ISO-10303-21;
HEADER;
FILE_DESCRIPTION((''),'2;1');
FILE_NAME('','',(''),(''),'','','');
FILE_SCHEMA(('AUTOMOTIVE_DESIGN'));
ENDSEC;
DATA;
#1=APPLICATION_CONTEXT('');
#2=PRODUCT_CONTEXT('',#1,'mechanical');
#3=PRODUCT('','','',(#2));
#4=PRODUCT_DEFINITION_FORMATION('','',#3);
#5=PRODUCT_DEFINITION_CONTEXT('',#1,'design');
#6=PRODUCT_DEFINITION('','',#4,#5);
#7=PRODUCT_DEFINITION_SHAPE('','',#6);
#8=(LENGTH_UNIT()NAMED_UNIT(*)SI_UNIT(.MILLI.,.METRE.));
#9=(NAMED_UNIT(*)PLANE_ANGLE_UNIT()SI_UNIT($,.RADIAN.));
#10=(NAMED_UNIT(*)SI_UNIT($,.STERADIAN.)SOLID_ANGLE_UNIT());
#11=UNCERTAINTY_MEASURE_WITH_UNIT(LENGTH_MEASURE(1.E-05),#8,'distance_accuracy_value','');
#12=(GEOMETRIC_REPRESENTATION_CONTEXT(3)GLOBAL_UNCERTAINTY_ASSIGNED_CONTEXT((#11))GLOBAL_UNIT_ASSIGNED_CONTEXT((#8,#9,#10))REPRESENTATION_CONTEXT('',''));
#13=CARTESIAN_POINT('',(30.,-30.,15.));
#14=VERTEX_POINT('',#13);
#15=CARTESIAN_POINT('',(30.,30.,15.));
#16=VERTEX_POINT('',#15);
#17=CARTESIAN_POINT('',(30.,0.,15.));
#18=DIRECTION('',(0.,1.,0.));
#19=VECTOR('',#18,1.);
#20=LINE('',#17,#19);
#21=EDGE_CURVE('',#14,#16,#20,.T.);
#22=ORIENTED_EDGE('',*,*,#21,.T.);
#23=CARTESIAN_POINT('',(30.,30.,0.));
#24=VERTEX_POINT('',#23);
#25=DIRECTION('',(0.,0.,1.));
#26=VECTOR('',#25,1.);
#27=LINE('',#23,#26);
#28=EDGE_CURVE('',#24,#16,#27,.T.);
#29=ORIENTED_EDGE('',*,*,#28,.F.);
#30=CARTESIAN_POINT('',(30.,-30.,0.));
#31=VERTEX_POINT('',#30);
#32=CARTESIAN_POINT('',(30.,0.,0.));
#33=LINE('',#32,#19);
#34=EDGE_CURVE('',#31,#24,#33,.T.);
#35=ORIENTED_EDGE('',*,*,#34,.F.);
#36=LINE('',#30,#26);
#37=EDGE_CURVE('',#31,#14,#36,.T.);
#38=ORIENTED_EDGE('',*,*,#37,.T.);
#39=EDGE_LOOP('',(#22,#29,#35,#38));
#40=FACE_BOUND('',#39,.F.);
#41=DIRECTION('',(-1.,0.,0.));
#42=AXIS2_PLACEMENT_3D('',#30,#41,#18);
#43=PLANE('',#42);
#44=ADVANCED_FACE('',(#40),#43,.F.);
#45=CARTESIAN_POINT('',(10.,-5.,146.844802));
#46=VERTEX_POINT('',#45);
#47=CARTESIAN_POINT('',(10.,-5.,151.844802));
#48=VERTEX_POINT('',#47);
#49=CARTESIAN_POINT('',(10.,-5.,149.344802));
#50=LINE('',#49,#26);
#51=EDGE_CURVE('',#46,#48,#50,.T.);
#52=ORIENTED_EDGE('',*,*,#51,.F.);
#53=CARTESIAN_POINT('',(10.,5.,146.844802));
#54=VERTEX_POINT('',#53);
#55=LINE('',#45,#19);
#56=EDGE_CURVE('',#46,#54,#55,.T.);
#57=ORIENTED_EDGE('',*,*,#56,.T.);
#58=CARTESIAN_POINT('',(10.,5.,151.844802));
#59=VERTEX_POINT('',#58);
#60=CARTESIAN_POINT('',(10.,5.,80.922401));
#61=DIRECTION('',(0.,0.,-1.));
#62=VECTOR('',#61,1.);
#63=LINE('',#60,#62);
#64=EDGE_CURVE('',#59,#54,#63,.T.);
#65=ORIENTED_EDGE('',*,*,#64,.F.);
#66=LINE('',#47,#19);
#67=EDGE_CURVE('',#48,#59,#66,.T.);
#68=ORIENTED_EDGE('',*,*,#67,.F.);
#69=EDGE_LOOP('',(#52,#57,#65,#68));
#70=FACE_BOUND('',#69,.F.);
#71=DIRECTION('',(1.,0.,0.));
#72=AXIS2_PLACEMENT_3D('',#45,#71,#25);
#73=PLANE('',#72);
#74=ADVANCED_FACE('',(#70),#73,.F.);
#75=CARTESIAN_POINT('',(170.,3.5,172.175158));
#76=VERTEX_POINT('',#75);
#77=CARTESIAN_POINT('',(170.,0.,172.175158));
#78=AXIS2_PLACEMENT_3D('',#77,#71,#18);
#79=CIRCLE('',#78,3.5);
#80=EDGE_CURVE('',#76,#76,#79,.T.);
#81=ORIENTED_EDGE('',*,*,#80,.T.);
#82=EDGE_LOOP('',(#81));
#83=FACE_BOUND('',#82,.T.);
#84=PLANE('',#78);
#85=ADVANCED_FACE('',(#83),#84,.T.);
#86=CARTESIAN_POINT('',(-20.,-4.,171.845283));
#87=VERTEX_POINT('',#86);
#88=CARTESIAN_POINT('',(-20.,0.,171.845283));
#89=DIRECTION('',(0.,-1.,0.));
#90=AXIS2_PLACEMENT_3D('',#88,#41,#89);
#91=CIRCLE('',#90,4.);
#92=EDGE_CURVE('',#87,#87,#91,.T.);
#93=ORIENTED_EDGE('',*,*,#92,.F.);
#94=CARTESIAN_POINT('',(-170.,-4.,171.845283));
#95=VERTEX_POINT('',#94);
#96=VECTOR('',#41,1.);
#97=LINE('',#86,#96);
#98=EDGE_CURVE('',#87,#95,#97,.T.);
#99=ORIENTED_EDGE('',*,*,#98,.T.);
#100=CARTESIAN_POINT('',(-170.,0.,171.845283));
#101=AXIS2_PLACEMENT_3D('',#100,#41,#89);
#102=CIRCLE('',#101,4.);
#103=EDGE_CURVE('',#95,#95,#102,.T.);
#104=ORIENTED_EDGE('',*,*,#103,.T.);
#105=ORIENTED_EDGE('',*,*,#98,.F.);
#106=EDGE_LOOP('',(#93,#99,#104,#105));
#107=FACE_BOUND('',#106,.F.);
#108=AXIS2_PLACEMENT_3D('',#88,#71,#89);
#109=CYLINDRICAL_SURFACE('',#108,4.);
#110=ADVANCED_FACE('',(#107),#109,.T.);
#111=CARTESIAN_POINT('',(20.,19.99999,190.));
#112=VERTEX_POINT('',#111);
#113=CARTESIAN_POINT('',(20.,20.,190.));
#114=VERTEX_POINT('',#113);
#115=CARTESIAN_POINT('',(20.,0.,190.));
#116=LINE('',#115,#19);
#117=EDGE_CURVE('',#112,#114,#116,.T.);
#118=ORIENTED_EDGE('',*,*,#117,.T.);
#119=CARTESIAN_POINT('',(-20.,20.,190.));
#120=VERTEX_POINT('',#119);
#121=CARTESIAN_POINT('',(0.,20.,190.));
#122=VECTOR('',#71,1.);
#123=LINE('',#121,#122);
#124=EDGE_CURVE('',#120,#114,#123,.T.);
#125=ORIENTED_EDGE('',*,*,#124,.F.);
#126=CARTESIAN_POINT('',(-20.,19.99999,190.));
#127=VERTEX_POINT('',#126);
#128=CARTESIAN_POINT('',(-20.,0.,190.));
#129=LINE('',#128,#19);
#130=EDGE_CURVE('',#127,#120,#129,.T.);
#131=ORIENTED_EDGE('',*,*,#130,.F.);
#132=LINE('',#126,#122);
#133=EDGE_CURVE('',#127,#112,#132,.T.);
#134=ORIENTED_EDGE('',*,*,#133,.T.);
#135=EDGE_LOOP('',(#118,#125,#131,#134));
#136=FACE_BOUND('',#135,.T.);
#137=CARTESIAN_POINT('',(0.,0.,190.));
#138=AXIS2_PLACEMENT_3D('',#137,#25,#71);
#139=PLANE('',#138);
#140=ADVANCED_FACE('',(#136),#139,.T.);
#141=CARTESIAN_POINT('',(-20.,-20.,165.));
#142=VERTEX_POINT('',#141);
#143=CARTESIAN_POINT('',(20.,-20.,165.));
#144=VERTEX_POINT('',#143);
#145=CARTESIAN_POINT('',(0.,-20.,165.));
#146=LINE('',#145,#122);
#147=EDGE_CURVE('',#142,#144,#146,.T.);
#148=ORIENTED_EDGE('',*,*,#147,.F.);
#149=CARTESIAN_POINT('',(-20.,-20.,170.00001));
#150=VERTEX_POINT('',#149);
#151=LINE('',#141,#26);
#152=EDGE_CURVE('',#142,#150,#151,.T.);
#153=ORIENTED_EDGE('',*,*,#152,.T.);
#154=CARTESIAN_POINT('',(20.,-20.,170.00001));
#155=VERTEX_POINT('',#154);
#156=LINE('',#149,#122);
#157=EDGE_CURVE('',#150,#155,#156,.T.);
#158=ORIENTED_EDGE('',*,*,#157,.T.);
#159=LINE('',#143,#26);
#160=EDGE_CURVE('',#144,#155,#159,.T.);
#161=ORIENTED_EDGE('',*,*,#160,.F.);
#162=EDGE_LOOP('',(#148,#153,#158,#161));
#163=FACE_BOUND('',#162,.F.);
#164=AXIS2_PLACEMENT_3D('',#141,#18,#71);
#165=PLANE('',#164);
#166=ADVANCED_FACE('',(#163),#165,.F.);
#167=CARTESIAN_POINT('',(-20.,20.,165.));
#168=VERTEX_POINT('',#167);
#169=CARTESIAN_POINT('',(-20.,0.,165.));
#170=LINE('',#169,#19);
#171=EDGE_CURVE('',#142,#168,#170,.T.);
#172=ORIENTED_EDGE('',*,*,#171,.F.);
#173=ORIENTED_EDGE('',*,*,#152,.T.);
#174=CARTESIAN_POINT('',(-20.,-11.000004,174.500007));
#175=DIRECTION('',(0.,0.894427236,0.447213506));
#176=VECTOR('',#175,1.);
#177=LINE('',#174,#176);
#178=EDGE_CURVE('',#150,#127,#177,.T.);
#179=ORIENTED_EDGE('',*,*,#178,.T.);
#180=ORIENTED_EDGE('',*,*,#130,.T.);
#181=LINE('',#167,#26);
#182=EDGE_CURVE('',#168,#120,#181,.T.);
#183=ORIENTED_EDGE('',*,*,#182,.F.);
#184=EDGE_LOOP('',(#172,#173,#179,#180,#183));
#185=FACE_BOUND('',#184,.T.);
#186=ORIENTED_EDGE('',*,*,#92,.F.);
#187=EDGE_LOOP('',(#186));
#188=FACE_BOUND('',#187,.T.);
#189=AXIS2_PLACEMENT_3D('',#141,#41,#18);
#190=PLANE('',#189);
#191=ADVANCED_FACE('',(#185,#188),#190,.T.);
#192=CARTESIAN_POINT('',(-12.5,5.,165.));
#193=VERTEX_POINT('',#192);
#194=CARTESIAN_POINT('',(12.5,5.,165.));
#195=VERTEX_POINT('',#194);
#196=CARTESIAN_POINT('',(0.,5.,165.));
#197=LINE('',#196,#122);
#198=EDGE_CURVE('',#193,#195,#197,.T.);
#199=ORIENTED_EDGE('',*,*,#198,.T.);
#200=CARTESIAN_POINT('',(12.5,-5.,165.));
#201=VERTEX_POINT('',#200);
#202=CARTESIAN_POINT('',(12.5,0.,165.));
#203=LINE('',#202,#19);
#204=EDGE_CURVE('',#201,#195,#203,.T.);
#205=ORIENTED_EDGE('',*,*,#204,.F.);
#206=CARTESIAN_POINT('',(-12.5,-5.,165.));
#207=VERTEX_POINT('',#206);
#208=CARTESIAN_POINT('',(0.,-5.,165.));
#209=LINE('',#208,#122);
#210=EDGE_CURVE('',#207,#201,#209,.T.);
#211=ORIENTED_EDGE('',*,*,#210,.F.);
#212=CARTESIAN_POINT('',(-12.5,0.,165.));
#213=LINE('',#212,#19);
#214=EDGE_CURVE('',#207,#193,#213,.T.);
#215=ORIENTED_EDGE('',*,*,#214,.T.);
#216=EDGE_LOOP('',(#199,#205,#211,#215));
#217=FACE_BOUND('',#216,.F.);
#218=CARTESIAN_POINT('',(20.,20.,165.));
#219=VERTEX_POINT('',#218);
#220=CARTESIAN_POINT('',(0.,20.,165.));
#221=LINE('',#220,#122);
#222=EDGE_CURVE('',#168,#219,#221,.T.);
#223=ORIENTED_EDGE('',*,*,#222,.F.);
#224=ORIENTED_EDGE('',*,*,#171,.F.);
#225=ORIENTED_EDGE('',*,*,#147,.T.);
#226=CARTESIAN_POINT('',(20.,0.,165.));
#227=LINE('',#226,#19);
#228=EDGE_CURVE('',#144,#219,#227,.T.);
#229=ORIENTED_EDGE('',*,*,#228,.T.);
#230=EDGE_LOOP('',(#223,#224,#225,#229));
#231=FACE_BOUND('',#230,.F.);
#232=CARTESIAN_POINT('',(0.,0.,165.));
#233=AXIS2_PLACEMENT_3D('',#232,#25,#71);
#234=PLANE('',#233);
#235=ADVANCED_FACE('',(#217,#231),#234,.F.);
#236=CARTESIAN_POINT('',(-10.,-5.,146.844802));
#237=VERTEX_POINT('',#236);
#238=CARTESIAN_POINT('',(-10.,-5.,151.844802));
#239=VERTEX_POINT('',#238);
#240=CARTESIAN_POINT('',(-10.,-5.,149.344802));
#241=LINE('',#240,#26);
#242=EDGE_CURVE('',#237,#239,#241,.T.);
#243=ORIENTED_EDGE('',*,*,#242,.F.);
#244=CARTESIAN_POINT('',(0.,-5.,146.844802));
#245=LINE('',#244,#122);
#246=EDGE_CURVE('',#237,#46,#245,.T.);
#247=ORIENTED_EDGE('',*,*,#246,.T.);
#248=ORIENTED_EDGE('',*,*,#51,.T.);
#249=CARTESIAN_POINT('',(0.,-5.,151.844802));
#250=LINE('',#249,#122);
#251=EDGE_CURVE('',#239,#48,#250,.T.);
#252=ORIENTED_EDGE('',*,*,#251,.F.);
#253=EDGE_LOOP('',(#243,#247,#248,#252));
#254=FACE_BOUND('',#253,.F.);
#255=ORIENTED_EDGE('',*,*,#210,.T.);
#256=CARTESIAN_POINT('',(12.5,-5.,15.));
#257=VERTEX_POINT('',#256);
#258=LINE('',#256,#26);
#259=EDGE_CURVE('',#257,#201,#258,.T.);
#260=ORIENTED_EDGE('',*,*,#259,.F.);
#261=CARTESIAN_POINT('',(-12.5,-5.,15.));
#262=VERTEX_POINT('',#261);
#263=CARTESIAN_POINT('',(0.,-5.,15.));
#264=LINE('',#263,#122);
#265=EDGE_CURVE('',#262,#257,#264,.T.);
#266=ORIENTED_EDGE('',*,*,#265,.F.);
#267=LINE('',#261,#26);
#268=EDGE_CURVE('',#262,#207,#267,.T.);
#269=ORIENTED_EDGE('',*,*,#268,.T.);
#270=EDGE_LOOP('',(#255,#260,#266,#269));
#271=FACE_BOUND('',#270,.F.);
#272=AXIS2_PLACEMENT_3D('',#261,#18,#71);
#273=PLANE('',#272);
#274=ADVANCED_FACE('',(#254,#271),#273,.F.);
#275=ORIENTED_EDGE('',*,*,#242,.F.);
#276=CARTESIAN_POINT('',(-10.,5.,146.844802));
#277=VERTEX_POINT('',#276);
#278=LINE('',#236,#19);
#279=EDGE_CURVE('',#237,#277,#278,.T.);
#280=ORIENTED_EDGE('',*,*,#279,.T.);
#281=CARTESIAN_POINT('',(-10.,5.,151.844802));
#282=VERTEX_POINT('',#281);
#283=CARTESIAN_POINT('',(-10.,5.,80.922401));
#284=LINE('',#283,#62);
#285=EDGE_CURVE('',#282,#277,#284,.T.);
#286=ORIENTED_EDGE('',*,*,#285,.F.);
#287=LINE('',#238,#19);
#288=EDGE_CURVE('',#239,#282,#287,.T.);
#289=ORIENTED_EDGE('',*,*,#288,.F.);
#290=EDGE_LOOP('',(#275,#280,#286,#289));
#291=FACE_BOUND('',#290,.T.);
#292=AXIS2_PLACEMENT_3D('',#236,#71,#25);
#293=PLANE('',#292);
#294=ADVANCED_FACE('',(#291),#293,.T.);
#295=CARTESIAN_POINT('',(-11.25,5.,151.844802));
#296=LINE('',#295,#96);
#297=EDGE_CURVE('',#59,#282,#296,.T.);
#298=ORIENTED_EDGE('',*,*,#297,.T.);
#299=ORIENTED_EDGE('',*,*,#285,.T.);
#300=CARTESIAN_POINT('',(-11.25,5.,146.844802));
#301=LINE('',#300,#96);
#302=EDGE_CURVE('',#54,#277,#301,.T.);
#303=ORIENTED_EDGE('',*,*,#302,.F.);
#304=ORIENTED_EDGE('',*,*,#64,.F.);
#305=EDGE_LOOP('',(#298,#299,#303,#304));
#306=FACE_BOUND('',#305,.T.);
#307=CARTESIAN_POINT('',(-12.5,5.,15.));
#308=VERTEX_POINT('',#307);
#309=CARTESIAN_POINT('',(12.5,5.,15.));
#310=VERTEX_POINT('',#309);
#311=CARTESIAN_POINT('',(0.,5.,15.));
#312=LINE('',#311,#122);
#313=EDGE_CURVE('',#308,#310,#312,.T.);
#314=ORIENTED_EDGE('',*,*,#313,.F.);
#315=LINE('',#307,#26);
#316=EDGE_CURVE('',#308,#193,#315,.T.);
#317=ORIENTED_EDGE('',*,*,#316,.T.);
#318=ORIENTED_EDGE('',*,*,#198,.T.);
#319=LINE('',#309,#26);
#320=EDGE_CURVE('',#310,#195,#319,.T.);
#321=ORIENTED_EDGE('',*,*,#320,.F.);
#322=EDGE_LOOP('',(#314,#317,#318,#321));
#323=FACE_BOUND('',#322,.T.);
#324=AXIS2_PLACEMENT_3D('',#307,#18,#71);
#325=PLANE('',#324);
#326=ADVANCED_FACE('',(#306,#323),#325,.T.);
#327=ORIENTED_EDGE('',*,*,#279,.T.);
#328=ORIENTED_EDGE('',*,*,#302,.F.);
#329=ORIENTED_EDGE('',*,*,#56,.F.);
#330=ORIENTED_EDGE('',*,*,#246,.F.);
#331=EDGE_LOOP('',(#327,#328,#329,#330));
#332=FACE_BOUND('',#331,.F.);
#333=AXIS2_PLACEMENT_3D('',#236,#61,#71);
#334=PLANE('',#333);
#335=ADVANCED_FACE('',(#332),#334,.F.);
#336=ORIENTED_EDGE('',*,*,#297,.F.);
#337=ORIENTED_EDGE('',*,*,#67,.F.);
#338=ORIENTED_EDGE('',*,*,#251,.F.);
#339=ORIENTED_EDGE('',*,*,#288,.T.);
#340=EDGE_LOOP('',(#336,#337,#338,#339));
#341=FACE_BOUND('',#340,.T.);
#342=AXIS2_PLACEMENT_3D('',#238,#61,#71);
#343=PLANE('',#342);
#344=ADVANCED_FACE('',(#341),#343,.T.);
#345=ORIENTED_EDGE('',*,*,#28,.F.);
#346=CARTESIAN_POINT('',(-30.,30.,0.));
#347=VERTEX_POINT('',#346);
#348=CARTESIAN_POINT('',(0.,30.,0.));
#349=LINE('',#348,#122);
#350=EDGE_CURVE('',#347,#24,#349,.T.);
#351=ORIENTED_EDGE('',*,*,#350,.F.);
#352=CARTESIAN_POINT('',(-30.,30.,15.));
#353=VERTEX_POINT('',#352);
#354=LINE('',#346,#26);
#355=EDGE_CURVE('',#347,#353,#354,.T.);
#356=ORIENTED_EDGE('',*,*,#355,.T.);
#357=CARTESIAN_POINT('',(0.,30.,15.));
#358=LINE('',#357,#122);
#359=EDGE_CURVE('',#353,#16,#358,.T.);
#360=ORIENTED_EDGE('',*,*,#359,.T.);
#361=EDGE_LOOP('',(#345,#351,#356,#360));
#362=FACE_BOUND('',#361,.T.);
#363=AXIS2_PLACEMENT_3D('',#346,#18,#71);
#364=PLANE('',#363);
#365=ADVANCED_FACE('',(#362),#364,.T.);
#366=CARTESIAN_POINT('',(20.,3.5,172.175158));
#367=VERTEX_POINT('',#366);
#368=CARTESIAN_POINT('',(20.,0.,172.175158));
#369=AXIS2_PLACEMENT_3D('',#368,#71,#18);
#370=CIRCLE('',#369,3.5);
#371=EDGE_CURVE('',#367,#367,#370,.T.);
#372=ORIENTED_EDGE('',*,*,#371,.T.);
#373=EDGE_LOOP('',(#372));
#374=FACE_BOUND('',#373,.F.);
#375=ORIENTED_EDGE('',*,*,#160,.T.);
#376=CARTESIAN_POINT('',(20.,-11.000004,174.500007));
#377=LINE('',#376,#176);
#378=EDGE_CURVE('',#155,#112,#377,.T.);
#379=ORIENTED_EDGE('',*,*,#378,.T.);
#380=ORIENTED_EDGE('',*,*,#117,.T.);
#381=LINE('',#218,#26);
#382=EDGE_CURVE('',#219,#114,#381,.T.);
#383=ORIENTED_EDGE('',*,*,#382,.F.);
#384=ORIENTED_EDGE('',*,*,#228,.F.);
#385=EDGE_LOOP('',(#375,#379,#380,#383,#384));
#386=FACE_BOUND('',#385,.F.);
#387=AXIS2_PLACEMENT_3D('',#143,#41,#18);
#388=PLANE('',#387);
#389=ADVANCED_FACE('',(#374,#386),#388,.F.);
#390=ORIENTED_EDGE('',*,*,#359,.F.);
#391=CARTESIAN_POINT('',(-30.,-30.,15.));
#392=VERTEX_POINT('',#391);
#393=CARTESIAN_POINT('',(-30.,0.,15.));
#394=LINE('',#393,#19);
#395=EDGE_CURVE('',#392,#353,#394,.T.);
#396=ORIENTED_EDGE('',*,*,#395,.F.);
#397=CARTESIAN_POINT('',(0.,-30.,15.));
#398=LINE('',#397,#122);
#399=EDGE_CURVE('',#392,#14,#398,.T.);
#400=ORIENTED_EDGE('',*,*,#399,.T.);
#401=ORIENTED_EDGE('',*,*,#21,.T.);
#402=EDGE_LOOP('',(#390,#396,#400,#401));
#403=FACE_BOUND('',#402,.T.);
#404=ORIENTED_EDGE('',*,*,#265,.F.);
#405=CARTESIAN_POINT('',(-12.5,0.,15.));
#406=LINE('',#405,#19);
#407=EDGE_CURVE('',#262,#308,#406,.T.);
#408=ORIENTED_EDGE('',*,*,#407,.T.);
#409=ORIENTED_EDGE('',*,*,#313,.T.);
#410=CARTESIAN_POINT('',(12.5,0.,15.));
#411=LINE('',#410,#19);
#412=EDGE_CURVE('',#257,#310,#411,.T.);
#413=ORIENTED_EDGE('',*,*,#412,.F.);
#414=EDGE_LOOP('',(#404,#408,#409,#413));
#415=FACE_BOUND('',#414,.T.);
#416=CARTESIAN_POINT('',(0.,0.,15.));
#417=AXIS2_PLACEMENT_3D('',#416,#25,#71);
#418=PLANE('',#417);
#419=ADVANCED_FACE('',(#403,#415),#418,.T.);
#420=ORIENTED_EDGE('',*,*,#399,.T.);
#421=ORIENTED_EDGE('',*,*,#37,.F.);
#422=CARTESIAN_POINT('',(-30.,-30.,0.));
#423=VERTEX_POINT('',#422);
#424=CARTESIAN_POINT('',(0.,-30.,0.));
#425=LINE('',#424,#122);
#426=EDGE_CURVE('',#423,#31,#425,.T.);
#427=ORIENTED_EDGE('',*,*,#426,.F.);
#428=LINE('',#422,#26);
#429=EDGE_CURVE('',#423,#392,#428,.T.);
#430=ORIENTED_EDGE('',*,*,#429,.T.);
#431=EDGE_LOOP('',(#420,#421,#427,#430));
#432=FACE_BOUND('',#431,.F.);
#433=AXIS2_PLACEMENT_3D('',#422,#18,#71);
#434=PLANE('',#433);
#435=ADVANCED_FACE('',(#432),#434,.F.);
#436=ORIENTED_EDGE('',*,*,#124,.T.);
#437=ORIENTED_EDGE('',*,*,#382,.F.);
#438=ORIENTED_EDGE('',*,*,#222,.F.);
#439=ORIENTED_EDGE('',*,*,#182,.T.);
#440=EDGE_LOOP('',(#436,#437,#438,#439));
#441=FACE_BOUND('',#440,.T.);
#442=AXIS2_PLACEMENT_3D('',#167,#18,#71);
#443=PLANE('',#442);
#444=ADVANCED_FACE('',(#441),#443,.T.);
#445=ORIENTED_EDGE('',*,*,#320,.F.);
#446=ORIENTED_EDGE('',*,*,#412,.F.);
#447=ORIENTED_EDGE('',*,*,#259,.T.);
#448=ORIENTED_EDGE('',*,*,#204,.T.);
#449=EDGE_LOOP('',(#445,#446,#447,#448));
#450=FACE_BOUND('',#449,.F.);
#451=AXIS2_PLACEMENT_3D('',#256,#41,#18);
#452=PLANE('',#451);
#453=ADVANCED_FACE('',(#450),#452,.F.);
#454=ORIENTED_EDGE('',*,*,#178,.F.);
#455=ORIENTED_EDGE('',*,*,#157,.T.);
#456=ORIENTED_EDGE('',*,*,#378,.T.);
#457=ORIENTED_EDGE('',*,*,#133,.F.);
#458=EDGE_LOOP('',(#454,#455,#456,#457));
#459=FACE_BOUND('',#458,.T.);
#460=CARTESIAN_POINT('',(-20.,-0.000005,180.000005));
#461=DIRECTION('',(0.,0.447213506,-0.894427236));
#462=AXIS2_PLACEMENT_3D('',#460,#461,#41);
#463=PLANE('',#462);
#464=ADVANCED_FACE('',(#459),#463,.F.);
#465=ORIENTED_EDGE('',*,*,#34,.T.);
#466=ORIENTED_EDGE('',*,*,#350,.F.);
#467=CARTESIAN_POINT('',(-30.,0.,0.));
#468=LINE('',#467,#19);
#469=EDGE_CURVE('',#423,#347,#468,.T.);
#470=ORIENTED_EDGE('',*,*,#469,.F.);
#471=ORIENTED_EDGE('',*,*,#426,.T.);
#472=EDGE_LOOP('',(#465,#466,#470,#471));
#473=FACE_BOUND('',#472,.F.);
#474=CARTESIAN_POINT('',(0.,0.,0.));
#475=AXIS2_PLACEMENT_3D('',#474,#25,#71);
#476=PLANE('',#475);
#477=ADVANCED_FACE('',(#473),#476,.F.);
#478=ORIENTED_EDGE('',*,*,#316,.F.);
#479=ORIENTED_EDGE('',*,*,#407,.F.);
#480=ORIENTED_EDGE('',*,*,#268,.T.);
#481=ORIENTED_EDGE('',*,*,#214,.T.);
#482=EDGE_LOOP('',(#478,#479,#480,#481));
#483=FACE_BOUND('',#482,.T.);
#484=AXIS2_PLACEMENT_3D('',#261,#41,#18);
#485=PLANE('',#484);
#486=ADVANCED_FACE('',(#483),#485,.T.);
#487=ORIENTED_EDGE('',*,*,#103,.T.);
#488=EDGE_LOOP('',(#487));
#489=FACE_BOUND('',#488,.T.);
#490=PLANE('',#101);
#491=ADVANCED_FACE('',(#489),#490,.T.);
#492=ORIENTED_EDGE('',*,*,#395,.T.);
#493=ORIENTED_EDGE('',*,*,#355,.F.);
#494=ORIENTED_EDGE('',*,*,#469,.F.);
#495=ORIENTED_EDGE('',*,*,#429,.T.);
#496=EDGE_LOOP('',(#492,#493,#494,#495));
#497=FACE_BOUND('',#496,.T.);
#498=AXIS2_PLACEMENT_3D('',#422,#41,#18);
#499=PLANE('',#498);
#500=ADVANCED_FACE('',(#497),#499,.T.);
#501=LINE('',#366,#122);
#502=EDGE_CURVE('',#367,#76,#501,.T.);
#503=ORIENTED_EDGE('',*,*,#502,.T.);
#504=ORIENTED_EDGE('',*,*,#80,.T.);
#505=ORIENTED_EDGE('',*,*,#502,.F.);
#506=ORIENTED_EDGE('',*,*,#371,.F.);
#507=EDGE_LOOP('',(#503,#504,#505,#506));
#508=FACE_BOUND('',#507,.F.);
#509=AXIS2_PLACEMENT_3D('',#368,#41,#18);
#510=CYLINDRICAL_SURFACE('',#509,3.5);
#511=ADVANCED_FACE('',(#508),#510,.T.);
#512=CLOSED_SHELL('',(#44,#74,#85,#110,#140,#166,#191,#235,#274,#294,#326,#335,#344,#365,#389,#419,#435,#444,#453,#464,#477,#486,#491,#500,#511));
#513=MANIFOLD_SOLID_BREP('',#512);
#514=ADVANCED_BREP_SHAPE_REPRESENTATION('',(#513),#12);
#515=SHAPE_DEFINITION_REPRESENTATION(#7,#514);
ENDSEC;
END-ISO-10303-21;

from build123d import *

# Parameters (mm, degrees)
F0_W      = 60
F0_H      = 60
F1_DEPTH  = 15
F2_W      = 25
F2_H      = 10
F3_DEPTH  = 150
F4_W      = 40
F4_H      = 40
F4_W_2    = 25
F4_H_2    = 10
F5_DEPTH  = 25
F6_SIZE2  = 39.99999
F6_SIZE   = 19.99999
F7_W      = 20
F7_H      = 5
F8_DEPTH  = 25
F9_R      = 3.5
F10_DEPTH = 150
F11_R     = 4
F12_DEPTH = 150


# Not quite as in the source:
# - a fillet or chamfer is up to 0.001 mm smaller than in the source, because OpenCascade refuses the exact size


with BuildPart() as f1:
    # F0 (on Top) → F1 (new body)
    with BuildSketch(Plane.XY):
        Rectangle(F0_W, F0_H)
    extrude(amount=F1_DEPTH)

    # F2 (on face) → F3 (join)
    with BuildSketch(Plane.XY.offset(15)):
        Rectangle(F2_W, F2_H)
    extrude(amount=F3_DEPTH)

    # F4 (on face) → F5 (join)
    with BuildSketch(Plane.XY.offset(165)):
        Rectangle(F4_W, F4_H)
        Rectangle(F4_W_2, F4_H_2, mode=Mode.SUBTRACT)
        Rectangle(F4_W_2, F4_H_2)
    extrude(amount=F5_DEPTH)

    # F6 (size 20 and 40 in the source; OpenCascade refuses exactly that, so slightly less here)
    f6_edges = [f1.edges().sort_by_distance(p)[0] for p in [
        (0, -20, 190),
    ]]
    f6_side = f1.faces().sort_by_distance((0, -20, 177.5))[0]
    chamfer(f6_edges, length=F6_SIZE, length2=F6_SIZE2, reference=f6_side)

    # F7 (on face) → F8 (cut)
    with BuildSketch(Plane.XZ.offset(5)):
        with Locations((0, 149.3448019028)):
            Rectangle(F7_W, F7_H)
    extrude(amount=-F8_DEPTH, mode=Mode.SUBTRACT)

    # F9 (on face) → F10 (join)
    with BuildSketch(Plane.YZ.offset(20)):
        with Locations((0, 172.1751581079)):
            Circle(F9_R)
    extrude(amount=F10_DEPTH)

    # F11 (on face) → F12 (join)
    with BuildSketch(Plane(origin=(-20, 0, 0), x_dir=(0, -1, 0), z_dir=(-1, 0, 0))):
        with Locations((0, 171.8452831515)):
            Circle(F11_R)
    extrude(amount=F12_DEPTH)


solid = f1.part
